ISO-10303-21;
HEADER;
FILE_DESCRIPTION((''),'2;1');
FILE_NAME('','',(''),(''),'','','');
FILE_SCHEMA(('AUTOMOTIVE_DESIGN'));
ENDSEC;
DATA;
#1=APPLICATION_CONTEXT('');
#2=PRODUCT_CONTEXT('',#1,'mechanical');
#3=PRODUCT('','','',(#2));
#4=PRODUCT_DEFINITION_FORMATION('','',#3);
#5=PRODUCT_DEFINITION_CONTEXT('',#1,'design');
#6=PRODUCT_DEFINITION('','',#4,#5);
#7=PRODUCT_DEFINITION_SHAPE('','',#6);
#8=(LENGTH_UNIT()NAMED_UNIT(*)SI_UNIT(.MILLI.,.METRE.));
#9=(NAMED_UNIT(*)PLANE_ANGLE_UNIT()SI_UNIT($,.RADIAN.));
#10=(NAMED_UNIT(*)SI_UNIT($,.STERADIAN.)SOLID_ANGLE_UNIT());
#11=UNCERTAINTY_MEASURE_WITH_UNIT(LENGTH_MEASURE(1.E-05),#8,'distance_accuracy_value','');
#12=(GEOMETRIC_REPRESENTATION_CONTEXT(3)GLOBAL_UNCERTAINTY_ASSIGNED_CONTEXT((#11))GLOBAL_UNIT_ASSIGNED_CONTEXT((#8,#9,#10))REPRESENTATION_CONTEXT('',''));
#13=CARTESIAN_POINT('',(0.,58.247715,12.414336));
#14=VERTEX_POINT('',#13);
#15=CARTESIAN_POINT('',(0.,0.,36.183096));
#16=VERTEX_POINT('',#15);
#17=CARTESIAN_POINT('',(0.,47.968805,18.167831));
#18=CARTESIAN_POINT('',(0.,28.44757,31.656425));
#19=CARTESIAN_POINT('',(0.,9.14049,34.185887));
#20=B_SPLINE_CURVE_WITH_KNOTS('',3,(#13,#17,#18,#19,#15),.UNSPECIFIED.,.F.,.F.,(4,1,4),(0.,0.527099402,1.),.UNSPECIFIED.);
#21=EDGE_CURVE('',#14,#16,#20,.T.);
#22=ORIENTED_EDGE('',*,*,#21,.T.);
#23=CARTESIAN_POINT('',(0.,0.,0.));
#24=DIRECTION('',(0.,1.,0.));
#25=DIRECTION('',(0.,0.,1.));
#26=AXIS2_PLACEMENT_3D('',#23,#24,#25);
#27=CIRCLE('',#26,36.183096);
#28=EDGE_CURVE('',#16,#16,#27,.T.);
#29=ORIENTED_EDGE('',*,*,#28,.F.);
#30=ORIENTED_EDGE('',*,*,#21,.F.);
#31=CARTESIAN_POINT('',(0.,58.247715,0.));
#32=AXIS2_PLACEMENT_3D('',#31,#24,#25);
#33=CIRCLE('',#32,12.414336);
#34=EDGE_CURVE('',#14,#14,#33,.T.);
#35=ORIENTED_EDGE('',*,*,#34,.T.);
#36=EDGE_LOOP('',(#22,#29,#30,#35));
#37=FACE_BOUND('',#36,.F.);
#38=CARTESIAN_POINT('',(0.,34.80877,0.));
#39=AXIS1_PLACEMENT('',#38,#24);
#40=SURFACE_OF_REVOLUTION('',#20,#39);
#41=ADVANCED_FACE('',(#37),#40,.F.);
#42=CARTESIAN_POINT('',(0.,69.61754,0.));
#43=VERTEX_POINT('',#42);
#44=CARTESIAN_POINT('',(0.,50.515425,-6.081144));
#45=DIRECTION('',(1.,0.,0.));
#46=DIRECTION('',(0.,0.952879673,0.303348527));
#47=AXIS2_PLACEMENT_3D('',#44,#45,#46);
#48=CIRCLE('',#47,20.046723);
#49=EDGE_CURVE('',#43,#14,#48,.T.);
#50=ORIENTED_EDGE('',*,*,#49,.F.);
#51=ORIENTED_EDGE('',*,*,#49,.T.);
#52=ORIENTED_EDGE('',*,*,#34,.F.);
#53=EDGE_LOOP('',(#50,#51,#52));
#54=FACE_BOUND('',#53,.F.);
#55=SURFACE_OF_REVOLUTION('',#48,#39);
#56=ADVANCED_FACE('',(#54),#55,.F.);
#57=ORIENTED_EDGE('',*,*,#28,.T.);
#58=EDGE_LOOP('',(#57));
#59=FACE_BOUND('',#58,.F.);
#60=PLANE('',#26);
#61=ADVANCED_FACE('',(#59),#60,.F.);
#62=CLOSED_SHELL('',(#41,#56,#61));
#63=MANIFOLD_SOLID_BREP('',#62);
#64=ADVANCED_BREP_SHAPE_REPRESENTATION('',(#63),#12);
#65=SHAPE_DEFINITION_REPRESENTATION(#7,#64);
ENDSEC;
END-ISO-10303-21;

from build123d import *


# Not quite as in the source:
# - a feature of the source that left no trace in its solid (it failed there, or was rolled back) is left out
# - the program builds the solid bodies; features that only make, move or delete a surface that nothing else refers to are left out


with BuildPart() as f1:
    # F0 (on Right) → F1 (revolve)
    with BuildSketch(Plane.YZ):
        with BuildLine():
            ThreePointArc((69.6175396442, 0), (65.2988703753, 7.4584587089), (58.2477152348, 12.4143362045))
            add(Edge.make_bspline(
                [(58.2477152348, 12.4143362045), (47.9688050987, 18.1678310384), (28.4475695168, 31.6564253526), (9.1404896716, 34.1858867887), (0, 36.1830964684)],
                knots=[0, 0, 0, 0, 0.5270994017, 1, 1, 1, 1], degree=3))
            Line((0, 36.1830964684), (0, 0))
            Line((0, 0), (69.6175396442, 0))
        make_face()
    revolve(axis=Axis((0, 34.8087698221, 0), (0, 1, 0)))


solid = f1.part
